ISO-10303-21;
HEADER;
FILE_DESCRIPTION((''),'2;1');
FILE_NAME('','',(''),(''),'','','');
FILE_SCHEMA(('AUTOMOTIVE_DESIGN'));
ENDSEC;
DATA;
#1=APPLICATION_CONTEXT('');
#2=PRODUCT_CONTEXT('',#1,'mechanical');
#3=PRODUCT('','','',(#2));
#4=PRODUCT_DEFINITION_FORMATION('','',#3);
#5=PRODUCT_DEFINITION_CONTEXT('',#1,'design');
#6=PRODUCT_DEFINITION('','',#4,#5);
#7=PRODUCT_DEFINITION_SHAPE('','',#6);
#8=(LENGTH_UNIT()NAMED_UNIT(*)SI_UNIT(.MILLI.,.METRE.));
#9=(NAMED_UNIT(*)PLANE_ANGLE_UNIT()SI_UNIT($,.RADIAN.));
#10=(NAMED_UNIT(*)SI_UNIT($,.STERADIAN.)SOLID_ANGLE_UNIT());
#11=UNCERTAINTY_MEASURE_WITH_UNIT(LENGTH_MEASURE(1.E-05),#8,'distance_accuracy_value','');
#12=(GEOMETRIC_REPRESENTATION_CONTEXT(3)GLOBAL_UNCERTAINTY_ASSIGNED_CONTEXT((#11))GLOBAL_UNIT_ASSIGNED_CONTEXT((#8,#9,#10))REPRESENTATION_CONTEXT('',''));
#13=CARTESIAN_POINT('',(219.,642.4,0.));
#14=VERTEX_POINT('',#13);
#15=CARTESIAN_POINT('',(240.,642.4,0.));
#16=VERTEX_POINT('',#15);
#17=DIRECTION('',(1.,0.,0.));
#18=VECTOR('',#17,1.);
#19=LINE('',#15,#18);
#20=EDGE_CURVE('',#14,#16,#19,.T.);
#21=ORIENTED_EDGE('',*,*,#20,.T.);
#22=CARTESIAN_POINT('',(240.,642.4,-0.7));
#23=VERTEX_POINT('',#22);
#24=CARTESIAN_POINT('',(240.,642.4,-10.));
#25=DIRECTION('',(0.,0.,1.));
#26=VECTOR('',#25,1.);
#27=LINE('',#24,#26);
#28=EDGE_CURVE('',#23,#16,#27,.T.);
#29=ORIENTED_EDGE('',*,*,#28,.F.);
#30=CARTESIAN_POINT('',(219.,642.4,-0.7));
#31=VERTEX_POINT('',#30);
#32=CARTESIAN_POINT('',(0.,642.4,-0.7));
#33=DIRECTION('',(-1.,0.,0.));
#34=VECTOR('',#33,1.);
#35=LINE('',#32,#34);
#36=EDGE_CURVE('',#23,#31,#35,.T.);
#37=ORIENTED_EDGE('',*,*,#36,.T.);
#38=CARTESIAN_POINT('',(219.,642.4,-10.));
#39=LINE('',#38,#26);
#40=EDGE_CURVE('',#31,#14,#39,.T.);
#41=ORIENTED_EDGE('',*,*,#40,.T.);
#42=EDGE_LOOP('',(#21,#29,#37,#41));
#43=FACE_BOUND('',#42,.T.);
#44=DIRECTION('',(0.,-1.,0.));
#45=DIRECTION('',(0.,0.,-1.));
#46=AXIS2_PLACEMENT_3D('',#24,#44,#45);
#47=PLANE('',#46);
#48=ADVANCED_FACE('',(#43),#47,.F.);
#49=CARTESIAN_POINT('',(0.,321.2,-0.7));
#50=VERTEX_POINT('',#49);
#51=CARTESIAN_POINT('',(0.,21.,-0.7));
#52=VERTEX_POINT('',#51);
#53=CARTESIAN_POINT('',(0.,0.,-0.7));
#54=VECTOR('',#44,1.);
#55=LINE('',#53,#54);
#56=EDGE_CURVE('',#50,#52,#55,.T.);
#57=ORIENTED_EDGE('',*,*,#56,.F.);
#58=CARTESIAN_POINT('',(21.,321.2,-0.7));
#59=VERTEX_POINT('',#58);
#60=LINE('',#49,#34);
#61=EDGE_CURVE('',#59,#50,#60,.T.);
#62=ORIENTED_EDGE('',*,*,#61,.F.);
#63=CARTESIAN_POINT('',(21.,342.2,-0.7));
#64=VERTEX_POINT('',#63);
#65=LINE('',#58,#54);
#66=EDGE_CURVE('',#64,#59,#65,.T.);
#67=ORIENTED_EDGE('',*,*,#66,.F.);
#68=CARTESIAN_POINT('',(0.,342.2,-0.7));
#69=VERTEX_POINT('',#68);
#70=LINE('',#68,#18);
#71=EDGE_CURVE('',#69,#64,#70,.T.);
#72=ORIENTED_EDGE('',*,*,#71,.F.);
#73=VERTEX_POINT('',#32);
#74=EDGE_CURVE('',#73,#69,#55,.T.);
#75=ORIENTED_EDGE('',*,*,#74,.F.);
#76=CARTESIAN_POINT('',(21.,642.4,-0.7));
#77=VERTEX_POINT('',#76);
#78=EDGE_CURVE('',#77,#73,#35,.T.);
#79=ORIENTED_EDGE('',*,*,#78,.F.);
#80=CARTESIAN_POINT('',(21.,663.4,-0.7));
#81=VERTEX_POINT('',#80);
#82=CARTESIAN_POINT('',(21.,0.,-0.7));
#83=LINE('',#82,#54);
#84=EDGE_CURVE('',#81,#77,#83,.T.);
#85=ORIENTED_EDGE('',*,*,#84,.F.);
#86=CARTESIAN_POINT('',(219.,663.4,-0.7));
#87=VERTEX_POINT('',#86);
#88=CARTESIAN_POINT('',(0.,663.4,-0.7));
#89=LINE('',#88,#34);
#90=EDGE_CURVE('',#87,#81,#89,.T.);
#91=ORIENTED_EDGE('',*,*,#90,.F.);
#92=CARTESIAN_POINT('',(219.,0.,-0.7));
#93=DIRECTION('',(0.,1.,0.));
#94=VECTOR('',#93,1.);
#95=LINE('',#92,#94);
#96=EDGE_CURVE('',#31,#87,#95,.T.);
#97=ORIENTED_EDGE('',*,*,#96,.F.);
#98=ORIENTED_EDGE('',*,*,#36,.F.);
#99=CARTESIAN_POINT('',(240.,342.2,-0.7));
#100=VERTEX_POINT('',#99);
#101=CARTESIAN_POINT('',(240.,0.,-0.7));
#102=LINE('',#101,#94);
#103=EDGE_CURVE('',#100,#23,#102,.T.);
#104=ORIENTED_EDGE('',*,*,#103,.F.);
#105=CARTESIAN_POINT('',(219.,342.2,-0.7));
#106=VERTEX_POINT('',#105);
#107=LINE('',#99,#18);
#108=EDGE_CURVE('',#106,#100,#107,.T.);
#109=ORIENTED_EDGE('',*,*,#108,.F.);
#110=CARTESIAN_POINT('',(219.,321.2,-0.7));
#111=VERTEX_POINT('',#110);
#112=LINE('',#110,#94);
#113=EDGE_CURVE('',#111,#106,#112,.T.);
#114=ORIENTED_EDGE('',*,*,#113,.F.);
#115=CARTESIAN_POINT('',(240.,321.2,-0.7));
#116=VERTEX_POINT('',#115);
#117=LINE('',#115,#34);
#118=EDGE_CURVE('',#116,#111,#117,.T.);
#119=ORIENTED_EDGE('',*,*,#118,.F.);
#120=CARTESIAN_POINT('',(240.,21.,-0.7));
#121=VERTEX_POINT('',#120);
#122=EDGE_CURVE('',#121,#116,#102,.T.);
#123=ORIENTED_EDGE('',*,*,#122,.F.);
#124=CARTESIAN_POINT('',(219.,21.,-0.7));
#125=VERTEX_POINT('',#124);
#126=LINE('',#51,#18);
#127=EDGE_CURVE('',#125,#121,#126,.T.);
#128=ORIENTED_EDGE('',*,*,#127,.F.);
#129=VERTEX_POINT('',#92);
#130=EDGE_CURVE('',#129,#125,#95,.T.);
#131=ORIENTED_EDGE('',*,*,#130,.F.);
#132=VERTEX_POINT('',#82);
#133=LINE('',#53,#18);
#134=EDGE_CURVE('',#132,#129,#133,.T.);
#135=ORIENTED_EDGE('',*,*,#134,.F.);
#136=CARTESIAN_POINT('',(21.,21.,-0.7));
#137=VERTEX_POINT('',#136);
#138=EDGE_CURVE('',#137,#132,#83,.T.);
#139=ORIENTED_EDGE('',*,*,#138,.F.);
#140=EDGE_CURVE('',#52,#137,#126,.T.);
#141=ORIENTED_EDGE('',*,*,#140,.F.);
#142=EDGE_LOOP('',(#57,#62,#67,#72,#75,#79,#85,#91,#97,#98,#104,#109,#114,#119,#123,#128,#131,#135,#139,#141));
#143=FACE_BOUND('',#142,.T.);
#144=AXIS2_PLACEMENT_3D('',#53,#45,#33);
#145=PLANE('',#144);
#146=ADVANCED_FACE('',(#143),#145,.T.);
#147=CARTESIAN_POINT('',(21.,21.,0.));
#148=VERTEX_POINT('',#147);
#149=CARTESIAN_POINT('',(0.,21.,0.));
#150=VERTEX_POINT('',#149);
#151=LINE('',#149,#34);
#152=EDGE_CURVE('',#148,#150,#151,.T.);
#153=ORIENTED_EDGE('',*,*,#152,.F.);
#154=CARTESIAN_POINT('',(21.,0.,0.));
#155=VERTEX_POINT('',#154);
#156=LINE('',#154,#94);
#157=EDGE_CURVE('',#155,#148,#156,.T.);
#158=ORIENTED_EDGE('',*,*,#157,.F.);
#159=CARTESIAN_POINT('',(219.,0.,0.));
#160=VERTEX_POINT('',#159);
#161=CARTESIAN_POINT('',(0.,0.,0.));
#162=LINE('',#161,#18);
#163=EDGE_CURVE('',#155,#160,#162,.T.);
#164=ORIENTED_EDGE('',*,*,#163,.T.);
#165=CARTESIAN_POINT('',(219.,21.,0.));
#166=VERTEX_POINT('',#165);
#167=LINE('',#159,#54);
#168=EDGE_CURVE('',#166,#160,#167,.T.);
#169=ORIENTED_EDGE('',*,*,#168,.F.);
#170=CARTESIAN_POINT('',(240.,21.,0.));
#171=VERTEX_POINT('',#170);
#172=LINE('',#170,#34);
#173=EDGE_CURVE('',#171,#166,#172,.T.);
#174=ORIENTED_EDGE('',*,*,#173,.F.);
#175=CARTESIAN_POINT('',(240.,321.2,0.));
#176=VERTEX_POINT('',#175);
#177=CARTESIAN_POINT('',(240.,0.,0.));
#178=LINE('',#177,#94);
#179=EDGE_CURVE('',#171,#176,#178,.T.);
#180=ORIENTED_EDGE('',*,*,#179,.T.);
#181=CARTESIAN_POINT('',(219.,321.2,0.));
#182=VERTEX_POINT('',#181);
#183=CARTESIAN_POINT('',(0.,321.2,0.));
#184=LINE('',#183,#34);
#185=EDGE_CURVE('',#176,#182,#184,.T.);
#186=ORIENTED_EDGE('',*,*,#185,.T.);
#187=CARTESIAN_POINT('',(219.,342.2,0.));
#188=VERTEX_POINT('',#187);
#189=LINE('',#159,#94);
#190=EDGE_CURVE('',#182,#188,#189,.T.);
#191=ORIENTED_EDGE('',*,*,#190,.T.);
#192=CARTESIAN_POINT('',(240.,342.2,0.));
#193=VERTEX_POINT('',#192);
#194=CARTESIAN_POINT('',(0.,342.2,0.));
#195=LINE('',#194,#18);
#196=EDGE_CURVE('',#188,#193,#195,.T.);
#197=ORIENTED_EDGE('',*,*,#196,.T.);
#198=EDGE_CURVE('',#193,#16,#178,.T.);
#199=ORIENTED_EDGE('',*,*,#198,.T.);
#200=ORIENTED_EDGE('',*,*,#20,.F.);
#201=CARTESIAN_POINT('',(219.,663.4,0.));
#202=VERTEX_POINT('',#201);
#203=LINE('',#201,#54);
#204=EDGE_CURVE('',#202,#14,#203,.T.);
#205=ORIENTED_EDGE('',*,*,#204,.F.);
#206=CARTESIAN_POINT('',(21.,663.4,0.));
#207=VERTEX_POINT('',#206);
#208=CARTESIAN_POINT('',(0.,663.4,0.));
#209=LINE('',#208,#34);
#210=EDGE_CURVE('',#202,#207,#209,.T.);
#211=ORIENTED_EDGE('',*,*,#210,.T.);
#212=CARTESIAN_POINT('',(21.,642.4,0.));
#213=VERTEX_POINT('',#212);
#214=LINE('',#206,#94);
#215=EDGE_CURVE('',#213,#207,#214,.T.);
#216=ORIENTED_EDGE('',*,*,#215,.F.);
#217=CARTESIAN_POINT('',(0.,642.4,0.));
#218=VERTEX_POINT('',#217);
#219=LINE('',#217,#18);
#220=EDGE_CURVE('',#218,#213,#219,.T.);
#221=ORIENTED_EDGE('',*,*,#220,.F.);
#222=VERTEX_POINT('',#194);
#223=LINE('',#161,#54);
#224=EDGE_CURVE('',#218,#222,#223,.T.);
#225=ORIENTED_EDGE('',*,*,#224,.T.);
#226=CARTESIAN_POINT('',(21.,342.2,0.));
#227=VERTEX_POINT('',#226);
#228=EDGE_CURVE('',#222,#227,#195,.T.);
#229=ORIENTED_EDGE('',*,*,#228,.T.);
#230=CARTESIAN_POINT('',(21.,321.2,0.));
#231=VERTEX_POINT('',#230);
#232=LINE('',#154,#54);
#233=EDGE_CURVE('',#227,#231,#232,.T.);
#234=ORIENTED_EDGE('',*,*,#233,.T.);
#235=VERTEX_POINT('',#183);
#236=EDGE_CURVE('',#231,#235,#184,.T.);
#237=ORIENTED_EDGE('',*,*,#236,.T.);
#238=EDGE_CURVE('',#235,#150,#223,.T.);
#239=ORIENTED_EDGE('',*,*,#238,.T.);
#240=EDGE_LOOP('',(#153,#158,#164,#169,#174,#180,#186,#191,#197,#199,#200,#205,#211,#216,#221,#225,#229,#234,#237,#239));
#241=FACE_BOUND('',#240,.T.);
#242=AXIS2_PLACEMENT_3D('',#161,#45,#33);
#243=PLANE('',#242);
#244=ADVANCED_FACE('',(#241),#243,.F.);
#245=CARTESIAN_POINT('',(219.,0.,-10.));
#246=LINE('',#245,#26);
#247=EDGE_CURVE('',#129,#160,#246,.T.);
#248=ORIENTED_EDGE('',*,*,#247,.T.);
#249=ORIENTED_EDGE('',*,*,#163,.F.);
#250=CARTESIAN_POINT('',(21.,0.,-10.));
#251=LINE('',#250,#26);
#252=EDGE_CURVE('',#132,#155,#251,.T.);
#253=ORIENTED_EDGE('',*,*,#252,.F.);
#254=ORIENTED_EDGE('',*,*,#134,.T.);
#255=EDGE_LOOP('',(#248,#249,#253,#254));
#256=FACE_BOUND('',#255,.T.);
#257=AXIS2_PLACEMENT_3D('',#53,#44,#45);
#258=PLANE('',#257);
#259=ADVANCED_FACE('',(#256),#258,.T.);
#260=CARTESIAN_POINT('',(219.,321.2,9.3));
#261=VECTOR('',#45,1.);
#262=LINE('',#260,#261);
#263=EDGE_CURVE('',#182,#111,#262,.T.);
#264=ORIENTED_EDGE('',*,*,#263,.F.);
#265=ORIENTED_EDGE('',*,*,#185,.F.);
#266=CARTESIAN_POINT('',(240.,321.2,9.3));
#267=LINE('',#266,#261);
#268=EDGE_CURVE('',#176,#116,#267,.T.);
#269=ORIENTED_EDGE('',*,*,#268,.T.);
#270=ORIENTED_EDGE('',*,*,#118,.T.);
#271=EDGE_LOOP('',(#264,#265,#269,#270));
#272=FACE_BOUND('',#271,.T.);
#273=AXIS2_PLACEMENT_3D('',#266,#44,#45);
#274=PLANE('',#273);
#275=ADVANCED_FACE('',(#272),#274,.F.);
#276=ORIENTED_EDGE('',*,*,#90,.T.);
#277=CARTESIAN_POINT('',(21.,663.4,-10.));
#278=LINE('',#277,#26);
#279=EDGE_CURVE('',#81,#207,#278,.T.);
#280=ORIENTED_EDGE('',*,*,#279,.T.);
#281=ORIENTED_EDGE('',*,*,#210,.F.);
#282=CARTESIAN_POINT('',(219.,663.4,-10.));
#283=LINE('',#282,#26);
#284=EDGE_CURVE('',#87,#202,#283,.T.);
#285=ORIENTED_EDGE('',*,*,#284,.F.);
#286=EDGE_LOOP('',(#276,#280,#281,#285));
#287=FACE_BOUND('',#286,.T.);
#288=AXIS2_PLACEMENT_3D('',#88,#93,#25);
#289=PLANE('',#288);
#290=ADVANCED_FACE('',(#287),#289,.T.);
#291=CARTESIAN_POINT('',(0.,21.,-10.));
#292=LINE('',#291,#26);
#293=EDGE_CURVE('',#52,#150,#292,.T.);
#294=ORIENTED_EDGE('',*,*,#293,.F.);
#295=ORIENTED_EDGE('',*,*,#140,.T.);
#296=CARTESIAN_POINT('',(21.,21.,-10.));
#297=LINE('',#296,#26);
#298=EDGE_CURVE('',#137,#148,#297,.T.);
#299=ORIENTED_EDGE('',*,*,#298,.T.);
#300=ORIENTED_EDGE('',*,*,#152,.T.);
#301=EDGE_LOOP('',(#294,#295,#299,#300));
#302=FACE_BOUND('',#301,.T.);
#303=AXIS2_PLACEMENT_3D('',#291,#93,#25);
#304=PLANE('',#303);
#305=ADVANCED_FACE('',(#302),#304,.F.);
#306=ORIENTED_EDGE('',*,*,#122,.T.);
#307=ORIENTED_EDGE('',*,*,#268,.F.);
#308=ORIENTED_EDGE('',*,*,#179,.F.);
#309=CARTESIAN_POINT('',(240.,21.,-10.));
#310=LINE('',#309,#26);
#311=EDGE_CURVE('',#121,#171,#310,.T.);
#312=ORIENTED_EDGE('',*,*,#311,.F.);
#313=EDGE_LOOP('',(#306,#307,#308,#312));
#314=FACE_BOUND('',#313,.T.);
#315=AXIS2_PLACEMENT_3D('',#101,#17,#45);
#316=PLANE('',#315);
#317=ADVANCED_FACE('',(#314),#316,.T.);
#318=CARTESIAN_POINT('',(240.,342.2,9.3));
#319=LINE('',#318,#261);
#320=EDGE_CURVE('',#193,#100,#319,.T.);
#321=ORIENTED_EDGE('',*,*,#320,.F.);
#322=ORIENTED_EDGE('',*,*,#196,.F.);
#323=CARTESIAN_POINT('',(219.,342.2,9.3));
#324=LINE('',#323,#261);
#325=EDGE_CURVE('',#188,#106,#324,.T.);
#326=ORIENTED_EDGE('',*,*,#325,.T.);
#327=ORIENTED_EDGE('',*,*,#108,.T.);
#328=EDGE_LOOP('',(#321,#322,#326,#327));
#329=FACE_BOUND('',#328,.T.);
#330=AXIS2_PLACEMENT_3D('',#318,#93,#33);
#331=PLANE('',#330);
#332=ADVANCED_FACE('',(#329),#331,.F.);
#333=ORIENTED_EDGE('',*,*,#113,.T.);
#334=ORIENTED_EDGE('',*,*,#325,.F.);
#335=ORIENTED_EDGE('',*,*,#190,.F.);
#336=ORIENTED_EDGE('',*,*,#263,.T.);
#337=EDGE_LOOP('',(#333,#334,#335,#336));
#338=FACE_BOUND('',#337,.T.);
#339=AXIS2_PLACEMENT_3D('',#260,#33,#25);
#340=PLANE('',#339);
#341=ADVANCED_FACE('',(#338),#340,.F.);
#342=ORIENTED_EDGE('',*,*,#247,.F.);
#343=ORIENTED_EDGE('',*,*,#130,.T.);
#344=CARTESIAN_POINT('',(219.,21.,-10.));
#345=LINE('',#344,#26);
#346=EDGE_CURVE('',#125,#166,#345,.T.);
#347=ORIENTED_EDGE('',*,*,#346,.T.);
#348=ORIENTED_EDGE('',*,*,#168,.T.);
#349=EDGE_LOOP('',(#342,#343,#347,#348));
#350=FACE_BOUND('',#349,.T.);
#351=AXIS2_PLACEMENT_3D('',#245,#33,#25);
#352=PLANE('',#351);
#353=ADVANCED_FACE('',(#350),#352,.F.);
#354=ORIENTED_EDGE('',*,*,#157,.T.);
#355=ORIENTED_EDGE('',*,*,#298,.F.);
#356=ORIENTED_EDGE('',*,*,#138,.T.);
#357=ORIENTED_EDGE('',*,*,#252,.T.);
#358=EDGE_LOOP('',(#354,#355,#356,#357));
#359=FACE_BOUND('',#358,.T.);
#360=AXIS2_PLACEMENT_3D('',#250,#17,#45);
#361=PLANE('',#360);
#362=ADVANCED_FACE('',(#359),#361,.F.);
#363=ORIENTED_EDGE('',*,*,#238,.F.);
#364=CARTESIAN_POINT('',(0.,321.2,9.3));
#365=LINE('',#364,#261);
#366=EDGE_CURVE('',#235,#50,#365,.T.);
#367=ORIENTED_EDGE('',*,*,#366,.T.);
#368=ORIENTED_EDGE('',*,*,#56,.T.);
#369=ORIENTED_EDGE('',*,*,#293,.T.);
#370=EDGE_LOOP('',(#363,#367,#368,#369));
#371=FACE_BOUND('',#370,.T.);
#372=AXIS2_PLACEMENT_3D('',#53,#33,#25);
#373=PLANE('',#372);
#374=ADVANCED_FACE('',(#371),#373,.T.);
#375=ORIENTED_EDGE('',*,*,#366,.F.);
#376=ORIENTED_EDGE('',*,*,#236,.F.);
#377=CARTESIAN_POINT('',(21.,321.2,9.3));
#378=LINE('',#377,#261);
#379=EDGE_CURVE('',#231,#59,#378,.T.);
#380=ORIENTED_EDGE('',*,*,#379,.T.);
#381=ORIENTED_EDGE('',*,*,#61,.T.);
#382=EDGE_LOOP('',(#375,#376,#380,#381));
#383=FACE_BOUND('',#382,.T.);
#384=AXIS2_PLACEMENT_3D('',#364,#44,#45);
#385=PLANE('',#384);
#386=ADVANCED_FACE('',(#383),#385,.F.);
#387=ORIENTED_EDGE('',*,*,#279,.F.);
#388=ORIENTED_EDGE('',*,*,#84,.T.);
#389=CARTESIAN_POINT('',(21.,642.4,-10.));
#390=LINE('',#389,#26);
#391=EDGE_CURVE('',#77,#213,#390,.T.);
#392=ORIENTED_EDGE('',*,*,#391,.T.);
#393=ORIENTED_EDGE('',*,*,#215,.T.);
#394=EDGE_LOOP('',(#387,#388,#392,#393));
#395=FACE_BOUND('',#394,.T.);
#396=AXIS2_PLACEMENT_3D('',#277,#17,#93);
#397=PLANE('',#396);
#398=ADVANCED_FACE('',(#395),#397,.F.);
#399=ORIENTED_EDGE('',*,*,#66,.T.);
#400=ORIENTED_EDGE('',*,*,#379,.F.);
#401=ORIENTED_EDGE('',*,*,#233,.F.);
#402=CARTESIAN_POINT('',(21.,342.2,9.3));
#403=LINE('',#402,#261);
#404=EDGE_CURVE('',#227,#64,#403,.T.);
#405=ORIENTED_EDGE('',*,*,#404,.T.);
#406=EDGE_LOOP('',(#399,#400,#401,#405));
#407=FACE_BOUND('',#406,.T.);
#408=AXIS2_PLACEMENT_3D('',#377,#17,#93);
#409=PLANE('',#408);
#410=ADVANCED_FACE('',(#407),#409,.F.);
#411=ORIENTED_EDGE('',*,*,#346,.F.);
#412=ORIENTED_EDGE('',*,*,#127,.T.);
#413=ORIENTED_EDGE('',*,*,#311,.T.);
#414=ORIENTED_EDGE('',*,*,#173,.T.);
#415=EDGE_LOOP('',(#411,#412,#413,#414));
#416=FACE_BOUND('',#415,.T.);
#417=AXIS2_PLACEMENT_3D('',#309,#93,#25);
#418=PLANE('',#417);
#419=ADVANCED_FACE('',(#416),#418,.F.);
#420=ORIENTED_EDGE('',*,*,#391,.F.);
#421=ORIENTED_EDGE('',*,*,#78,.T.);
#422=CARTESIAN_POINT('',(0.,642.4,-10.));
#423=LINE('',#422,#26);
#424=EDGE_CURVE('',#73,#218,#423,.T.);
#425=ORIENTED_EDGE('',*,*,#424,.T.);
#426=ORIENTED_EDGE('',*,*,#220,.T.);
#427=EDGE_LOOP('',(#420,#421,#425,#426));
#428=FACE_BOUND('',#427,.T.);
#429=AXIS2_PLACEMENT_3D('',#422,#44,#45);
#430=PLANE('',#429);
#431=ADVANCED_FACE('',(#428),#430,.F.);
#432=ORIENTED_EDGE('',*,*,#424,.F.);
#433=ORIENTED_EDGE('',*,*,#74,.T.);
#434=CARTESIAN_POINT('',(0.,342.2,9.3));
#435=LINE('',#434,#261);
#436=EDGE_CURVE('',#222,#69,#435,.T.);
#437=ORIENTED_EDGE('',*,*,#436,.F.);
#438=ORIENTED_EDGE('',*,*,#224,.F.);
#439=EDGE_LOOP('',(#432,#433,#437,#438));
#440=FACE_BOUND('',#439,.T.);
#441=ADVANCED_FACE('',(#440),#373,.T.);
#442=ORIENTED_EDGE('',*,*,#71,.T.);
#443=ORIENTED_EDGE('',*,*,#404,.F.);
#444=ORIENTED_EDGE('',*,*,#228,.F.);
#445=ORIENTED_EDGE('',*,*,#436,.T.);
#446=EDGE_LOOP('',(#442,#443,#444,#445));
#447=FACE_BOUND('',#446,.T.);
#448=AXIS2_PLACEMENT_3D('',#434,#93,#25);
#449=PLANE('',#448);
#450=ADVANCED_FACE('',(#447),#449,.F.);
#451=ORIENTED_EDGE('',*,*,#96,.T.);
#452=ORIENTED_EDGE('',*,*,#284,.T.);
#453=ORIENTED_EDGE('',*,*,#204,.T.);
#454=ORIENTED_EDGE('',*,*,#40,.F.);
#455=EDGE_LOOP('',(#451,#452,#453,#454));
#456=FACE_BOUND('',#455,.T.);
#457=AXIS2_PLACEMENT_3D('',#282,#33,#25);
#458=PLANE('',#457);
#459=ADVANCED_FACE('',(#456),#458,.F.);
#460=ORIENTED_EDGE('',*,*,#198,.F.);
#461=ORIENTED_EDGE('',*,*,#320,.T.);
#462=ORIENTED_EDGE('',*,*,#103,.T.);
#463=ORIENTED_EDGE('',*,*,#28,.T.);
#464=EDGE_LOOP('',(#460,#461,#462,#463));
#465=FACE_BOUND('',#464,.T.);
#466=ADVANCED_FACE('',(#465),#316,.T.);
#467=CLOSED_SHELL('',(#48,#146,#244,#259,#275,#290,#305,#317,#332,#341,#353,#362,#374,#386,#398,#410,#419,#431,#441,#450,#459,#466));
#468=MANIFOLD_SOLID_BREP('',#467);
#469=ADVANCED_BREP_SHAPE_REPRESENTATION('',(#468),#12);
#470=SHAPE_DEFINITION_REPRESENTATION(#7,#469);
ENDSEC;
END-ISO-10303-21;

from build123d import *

# Parameters (mm, degrees)
SKETCH1_W          = 240
SKETCH1_H          = 663.4
BASE_FLANGE1_DEPTH = 0.7
SKETCH2_W          = 21
SKETCH2_H          = 21
CUT_EXTRUDE1_DEPTH = 10
SKETCH3_W          = 21
SKETCH3_H          = 21
CUT_EXTRUDE2_DEPTH = 10


# Sheet-metal steps are written as plain solids
with BuildPart() as part:
    # Sketch1 → Base-Flange1 (new body)
    with BuildSketch(Plane.XY):
        with Locations((120, 331.7)):
            Rectangle(SKETCH1_W, SKETCH1_H)
    extrude(amount=-BASE_FLANGE1_DEPTH)

    # Sketch2 → Cut-Extrude1 (cut)
    with BuildSketch(Plane.XY):
        with Locations((229.5, 652.9)):
            Rectangle(SKETCH2_W, SKETCH2_H)
        with Locations((10.5, 652.9)):
            Rectangle(SKETCH2_W, SKETCH2_H)
        with Locations((10.5, 10.5)):
            Rectangle(SKETCH2_W, SKETCH2_H)
        with Locations((229.5, 10.5)):
            Rectangle(SKETCH2_W, SKETCH2_H)
    extrude(amount=-CUT_EXTRUDE1_DEPTH, mode=Mode.SUBTRACT)

    # Sketch3 → Cut-Extrude2 (cut)
    with BuildSketch(Plane(origin=(0, 0, -0.7), x_dir=(-1, 0, 0), z_dir=(0, 0, -1))):
        with Locations((-10.5, 331.7)):
            Rectangle(SKETCH3_W, SKETCH3_H)
        with Locations((-229.5, 331.7)):
            Rectangle(SKETCH3_W, SKETCH3_H)
    extrude(amount=-CUT_EXTRUDE2_DEPTH, mode=Mode.SUBTRACT)


solid = part.part
